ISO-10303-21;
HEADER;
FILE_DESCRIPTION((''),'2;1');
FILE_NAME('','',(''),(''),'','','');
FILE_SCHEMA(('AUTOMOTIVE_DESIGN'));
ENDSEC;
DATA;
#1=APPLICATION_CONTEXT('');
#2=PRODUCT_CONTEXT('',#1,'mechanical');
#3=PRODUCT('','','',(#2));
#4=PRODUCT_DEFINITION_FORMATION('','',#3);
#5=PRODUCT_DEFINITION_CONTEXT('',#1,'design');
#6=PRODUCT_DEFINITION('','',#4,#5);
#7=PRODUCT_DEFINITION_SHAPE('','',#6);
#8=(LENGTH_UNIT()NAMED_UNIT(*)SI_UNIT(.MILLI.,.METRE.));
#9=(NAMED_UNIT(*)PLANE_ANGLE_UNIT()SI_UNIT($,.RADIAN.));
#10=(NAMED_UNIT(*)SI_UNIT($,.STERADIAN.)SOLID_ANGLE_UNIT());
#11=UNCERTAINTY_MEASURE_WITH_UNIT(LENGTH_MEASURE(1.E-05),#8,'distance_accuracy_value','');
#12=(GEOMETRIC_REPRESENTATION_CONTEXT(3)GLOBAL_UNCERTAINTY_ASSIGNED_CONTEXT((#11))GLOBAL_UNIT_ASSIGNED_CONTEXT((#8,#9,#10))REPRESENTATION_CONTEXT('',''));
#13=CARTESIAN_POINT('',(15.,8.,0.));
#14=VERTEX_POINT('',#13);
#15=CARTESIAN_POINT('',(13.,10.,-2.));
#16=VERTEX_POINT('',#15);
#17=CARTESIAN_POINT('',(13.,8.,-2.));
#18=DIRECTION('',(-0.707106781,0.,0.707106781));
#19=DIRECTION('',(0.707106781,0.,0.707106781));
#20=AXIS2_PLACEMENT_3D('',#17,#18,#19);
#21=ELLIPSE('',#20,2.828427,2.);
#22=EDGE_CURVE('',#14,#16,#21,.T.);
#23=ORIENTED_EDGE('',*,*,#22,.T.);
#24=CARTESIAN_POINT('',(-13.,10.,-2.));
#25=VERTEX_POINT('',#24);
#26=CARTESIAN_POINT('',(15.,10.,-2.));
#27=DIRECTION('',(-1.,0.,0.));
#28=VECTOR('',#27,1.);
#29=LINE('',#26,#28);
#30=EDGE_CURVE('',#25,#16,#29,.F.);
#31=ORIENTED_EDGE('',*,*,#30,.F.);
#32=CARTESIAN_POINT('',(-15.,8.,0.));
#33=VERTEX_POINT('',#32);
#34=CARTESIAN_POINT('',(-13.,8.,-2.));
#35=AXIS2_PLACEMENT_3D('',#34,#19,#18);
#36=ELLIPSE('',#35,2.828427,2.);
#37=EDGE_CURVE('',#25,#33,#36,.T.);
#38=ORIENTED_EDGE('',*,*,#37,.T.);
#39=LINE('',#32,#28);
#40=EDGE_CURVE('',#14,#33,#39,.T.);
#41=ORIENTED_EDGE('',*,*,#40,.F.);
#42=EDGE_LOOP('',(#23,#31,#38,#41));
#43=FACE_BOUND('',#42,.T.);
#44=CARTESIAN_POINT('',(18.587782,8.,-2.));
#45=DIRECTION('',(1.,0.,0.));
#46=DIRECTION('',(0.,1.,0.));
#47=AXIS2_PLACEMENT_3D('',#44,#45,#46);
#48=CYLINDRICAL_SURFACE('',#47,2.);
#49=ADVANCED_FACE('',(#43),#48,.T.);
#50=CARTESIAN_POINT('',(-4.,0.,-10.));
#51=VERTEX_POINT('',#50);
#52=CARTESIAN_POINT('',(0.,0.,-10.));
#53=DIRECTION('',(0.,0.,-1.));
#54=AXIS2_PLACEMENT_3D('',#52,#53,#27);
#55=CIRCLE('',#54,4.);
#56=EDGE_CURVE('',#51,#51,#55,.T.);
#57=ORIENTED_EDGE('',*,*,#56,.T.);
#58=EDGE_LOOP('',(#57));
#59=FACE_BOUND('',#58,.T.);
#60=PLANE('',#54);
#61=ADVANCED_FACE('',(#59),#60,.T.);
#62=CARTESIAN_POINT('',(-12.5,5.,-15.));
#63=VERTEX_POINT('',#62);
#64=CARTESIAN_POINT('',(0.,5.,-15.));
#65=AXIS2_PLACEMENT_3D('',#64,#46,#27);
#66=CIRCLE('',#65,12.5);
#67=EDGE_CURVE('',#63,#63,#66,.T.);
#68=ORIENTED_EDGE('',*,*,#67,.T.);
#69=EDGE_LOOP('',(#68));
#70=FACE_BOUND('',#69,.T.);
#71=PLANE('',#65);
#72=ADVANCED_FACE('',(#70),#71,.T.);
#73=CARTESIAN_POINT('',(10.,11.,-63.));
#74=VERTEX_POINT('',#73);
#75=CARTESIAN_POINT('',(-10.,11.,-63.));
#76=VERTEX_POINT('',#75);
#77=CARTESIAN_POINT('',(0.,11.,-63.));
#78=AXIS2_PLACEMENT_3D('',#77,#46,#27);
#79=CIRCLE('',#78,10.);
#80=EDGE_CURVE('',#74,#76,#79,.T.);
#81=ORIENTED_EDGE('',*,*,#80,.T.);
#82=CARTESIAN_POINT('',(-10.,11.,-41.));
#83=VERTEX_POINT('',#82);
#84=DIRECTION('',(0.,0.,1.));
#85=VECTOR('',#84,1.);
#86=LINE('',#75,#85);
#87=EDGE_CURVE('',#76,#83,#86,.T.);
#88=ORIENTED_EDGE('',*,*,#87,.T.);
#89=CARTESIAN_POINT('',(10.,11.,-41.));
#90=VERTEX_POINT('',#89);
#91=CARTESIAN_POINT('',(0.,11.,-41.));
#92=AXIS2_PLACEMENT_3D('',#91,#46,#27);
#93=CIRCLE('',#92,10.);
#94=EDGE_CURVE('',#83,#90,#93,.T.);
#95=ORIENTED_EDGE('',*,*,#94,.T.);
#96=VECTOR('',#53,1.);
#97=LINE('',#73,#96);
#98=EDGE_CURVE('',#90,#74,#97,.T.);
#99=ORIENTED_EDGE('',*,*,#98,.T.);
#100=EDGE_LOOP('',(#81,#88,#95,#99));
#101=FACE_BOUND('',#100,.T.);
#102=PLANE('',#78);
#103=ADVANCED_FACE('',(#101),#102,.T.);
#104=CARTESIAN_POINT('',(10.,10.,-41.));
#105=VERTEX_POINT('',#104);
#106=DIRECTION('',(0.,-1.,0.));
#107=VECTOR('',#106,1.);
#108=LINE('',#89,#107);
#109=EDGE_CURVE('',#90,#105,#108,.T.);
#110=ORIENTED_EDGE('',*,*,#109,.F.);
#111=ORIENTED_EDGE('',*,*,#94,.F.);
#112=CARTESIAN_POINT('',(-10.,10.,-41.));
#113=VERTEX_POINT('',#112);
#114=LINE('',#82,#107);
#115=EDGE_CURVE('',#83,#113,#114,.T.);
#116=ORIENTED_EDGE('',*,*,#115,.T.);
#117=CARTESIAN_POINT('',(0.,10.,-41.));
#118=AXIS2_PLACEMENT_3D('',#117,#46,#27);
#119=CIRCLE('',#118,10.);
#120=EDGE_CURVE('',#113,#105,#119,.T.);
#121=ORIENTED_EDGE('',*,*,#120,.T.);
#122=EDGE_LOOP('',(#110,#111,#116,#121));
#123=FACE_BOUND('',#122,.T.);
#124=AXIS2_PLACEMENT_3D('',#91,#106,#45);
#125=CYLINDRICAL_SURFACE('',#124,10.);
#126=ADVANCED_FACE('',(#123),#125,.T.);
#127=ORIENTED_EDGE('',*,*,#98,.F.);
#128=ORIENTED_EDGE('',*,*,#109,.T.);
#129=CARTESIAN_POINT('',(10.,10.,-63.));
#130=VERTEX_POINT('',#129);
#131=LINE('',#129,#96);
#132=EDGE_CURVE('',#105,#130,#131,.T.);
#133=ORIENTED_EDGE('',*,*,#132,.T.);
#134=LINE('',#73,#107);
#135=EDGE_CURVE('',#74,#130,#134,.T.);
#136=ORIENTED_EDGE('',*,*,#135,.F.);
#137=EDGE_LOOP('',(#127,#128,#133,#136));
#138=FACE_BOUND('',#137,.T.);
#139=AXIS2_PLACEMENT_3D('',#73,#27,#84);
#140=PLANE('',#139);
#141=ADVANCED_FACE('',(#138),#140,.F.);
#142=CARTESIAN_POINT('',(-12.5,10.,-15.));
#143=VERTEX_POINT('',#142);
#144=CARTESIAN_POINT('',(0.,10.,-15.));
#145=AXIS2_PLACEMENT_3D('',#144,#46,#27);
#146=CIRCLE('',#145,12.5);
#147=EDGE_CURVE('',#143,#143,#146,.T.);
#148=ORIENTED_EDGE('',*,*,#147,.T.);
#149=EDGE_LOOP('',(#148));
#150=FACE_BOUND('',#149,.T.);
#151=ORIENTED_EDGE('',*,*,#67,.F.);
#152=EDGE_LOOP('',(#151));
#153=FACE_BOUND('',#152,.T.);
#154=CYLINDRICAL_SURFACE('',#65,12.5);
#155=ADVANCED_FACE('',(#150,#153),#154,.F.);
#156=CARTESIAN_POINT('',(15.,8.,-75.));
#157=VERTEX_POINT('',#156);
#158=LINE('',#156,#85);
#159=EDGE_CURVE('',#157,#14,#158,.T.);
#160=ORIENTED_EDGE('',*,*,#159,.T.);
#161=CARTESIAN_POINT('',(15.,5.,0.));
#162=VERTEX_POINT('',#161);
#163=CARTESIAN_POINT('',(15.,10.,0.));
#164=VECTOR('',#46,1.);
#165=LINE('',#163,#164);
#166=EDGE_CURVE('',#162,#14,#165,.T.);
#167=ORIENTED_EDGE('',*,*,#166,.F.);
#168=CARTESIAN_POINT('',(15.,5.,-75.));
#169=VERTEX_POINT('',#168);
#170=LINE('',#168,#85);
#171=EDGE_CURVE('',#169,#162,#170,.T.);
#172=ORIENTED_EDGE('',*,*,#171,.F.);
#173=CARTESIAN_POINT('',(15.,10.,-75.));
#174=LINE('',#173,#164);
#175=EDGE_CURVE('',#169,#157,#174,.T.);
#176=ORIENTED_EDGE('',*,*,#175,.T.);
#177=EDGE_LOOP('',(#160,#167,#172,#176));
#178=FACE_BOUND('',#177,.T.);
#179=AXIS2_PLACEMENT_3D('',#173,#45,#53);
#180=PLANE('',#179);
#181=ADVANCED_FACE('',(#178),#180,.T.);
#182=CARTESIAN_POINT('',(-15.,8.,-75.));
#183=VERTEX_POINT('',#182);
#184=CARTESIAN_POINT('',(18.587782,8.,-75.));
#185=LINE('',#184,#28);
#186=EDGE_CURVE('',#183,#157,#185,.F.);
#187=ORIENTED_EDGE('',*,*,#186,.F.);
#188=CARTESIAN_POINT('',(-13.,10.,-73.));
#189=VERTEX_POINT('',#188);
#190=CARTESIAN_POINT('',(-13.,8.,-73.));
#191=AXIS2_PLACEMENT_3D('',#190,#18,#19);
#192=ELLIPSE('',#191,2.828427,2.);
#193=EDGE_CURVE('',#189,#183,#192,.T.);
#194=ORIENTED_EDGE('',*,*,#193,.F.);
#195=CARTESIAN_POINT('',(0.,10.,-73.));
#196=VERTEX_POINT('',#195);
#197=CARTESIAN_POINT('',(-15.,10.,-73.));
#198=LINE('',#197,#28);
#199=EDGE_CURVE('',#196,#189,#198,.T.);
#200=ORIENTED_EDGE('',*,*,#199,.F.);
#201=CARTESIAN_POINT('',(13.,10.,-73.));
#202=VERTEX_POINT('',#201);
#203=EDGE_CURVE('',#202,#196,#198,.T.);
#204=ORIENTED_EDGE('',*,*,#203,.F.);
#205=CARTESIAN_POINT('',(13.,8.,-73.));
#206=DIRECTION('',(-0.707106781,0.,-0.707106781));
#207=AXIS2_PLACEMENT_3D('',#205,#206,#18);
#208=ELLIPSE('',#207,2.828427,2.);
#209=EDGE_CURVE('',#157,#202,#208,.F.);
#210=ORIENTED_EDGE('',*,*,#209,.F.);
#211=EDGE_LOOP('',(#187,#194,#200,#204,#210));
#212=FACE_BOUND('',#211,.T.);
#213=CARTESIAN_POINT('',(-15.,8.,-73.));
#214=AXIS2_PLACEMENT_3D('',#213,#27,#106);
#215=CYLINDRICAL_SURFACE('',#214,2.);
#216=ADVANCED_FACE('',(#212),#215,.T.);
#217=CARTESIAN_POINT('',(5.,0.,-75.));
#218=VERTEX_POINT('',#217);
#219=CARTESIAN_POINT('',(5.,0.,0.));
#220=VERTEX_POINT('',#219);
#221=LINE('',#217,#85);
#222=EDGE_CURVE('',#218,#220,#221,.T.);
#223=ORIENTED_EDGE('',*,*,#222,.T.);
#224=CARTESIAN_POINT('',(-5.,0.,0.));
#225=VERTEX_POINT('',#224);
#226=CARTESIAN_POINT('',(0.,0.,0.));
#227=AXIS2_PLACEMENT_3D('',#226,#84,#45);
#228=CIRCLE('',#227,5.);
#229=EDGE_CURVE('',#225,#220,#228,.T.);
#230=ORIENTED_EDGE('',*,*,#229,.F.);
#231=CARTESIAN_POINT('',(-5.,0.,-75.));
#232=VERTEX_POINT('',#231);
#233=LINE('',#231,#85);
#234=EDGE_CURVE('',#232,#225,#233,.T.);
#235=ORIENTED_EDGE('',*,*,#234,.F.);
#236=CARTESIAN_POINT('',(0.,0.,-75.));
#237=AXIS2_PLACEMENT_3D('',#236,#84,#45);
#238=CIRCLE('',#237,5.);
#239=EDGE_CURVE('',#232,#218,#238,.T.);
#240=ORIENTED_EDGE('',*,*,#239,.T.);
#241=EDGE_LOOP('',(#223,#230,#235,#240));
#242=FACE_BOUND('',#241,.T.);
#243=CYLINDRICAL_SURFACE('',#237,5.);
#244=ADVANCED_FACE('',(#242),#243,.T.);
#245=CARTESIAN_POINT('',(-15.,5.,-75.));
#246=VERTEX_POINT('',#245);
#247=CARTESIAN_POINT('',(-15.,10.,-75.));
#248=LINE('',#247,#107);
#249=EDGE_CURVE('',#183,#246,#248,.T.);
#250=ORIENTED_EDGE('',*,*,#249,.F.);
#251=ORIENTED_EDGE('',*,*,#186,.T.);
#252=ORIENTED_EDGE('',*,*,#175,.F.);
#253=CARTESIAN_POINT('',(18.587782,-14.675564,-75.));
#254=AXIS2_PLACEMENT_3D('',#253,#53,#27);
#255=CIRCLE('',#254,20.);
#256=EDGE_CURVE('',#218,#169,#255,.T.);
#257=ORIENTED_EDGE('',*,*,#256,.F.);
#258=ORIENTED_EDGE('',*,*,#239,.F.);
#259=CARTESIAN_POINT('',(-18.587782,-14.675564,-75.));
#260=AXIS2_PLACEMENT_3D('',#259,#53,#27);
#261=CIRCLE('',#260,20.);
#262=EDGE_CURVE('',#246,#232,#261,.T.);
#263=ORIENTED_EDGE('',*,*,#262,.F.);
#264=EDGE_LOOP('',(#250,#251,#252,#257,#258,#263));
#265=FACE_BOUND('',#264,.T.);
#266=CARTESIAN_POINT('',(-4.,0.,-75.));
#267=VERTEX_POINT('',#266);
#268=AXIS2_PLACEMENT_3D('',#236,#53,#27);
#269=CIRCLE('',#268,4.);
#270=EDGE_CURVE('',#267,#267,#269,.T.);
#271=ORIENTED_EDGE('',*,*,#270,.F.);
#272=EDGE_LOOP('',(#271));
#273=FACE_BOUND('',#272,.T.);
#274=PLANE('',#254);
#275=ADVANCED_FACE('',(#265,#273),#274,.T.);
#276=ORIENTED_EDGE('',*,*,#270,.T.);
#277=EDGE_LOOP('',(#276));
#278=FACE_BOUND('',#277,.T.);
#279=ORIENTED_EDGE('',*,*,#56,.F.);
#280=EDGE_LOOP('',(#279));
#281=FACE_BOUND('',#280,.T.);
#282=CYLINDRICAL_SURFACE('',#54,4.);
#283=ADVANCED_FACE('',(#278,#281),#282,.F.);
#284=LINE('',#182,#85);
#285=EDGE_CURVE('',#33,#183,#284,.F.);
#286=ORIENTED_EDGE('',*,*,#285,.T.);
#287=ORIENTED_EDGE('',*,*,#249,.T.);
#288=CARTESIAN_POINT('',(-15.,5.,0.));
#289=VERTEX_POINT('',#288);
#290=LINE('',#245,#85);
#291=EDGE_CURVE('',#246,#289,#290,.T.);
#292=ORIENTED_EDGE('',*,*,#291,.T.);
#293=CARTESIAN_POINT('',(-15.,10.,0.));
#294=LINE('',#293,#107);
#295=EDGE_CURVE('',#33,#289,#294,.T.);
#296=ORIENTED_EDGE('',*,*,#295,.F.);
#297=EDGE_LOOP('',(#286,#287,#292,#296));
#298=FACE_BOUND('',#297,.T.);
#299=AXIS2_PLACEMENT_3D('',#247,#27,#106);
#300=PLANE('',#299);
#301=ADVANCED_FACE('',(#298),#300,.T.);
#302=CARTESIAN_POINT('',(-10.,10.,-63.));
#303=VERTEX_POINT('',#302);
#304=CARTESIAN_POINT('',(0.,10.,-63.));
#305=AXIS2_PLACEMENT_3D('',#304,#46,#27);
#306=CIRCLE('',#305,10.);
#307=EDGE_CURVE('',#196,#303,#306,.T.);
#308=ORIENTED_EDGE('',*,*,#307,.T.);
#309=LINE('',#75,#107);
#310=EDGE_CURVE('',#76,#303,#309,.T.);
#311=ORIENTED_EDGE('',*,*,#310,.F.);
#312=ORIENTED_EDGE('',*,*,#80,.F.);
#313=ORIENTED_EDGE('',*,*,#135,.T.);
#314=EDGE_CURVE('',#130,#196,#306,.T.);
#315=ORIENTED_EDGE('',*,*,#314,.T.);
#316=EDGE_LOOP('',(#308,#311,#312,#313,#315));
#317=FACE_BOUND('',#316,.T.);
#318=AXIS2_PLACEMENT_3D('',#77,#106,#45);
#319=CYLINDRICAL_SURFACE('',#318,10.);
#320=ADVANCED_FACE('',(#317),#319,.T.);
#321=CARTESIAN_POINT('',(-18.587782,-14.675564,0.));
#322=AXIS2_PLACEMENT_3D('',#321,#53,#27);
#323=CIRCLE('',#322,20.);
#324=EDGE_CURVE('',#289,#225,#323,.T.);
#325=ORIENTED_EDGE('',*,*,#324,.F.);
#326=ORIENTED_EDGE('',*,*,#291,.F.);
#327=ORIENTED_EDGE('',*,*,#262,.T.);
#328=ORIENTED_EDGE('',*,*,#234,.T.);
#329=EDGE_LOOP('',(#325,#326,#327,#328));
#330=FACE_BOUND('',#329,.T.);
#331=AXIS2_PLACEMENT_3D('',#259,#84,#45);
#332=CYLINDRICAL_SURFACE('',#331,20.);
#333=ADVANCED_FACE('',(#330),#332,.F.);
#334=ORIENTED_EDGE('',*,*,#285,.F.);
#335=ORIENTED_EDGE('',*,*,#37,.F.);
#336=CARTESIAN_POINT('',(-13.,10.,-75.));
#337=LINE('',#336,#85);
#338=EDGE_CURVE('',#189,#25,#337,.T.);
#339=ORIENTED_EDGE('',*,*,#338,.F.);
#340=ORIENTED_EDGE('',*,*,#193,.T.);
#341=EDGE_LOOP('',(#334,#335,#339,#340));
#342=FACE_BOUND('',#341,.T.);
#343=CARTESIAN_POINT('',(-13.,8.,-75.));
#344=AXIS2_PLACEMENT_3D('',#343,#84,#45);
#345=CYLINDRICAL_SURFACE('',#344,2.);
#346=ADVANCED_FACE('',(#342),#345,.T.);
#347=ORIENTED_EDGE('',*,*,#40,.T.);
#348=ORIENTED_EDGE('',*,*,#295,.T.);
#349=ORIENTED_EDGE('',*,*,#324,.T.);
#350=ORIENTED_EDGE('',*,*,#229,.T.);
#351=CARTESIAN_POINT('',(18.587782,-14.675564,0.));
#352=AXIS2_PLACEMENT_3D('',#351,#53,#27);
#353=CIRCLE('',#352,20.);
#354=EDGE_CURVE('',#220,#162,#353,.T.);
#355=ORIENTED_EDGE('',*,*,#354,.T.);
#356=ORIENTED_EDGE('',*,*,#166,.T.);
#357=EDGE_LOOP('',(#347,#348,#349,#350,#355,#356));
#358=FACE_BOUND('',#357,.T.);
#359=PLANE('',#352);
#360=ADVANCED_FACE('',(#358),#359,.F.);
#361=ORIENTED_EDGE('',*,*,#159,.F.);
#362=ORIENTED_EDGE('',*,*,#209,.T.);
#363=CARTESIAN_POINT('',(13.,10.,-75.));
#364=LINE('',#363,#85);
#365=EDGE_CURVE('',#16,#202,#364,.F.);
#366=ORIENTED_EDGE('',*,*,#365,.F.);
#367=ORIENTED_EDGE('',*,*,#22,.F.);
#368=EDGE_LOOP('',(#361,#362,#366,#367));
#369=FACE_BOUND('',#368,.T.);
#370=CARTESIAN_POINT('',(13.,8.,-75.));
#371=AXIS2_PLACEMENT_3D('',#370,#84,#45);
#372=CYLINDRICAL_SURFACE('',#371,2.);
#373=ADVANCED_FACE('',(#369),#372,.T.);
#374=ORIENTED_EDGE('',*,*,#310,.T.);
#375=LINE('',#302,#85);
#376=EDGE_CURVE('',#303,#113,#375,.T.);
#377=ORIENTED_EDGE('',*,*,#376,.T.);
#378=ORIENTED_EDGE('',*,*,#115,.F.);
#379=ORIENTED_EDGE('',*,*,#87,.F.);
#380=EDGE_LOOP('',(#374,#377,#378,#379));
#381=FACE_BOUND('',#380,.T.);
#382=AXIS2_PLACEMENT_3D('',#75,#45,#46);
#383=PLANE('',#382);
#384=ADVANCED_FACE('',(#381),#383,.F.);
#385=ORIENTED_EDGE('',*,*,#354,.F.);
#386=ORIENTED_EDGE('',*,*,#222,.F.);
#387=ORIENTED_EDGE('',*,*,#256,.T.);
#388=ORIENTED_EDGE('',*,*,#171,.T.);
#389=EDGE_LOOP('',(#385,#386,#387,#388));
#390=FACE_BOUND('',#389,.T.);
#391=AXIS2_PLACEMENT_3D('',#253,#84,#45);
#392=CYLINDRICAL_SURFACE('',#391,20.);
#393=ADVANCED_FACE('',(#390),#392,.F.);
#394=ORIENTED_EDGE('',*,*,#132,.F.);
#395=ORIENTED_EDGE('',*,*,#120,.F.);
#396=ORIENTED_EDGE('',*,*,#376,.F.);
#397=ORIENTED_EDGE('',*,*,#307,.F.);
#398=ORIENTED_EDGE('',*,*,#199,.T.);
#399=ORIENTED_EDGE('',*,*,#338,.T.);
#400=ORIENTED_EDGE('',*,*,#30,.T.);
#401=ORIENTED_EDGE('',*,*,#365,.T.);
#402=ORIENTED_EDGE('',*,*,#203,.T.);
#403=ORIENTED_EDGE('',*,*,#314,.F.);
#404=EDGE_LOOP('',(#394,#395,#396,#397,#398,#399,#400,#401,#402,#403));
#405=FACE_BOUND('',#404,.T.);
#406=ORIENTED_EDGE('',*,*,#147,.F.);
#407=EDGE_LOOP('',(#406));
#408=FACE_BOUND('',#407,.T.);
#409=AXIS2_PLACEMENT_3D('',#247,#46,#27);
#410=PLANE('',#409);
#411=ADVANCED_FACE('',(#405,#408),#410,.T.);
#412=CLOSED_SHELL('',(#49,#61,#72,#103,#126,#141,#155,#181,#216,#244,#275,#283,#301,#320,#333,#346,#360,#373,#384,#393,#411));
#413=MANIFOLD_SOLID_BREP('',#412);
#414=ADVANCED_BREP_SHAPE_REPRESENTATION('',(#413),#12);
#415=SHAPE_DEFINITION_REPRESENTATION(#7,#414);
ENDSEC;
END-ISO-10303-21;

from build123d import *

# Parameters (mm, degrees)
BOSS_EXTRUDE1_DEPTH = 75
SKETCH3_R           = 4
CUT_EXTRUDE1_DEPTH  = 65
BOSS_EXTRUDE2_DEPTH = 1
SKETCH5_R           = 12.5
CUT_EXTRUDE2_DEPTH  = 5
FILLET1_R           = 2


with BuildPart() as part:
    # Sketch1 → Boss-Extrude1 (new body)
    with BuildSketch(Plane.XY):
        with BuildLine():
            Line((-15, 10), (15, 10))
            Line((15, 10), (15, 5))
            ThreePointArc((15, 5), (9.643510109, 3.212979783), (5, 0))
            ThreePointArc((5, 0), (0, -5), (-5, 0))
            ThreePointArc((-5, 0), (-9.643510109, 3.212979783), (-15, 5))
            Line((-15, 5), (-15, 10))
        make_face()
    extrude(amount=-BOSS_EXTRUDE1_DEPTH)

    # Sketch3 → Cut-Extrude1 (cut)
    with BuildSketch(Plane(origin=(0, 0, -75), x_dir=(-1, 0, 0), z_dir=(0, 0, -1))):
        Circle(SKETCH3_R)
    extrude(amount=-CUT_EXTRUDE1_DEPTH, mode=Mode.SUBTRACT)

    # Sketch4 → Boss-Extrude2 (add)
    with BuildSketch(Plane(origin=(0, 10, 0), x_dir=(1, 0, 0), z_dir=(0, 1, 0))):
        with BuildLine():
            Line((-10, 63), (-10, 41))
            ThreePointArc((-10, 41), (0, 31), (10, 41))
            Line((10, 41), (10, 63))
            ThreePointArc((10, 63), (0, 73), (-10, 63))
        make_face()
    extrude(amount=BOSS_EXTRUDE2_DEPTH)

    # Sketch5 → Cut-Extrude2 (cut)
    with BuildSketch(Plane(origin=(0, 10, 0), x_dir=(1, 0, 0), z_dir=(0, 1, 0))):
        with Locations(Location((0, 15, 0), (0, 0, 180))):
            Circle(SKETCH5_R)
    extrude(amount=-CUT_EXTRUDE2_DEPTH, mode=Mode.SUBTRACT)

    # Fillet1
    fillet1_edges = [part.edges().sort_by_distance(p)[0] for p in [
        (-15, 10, -37.5),
        (15, 10, -37.5),
        (0, 10, -75),
        (0, 10, 0),
    ]]
    fillet(fillet1_edges, radius=FILLET1_R - 0.0001)  # a hair under: the kernel refuses the full size


solid = part.part
